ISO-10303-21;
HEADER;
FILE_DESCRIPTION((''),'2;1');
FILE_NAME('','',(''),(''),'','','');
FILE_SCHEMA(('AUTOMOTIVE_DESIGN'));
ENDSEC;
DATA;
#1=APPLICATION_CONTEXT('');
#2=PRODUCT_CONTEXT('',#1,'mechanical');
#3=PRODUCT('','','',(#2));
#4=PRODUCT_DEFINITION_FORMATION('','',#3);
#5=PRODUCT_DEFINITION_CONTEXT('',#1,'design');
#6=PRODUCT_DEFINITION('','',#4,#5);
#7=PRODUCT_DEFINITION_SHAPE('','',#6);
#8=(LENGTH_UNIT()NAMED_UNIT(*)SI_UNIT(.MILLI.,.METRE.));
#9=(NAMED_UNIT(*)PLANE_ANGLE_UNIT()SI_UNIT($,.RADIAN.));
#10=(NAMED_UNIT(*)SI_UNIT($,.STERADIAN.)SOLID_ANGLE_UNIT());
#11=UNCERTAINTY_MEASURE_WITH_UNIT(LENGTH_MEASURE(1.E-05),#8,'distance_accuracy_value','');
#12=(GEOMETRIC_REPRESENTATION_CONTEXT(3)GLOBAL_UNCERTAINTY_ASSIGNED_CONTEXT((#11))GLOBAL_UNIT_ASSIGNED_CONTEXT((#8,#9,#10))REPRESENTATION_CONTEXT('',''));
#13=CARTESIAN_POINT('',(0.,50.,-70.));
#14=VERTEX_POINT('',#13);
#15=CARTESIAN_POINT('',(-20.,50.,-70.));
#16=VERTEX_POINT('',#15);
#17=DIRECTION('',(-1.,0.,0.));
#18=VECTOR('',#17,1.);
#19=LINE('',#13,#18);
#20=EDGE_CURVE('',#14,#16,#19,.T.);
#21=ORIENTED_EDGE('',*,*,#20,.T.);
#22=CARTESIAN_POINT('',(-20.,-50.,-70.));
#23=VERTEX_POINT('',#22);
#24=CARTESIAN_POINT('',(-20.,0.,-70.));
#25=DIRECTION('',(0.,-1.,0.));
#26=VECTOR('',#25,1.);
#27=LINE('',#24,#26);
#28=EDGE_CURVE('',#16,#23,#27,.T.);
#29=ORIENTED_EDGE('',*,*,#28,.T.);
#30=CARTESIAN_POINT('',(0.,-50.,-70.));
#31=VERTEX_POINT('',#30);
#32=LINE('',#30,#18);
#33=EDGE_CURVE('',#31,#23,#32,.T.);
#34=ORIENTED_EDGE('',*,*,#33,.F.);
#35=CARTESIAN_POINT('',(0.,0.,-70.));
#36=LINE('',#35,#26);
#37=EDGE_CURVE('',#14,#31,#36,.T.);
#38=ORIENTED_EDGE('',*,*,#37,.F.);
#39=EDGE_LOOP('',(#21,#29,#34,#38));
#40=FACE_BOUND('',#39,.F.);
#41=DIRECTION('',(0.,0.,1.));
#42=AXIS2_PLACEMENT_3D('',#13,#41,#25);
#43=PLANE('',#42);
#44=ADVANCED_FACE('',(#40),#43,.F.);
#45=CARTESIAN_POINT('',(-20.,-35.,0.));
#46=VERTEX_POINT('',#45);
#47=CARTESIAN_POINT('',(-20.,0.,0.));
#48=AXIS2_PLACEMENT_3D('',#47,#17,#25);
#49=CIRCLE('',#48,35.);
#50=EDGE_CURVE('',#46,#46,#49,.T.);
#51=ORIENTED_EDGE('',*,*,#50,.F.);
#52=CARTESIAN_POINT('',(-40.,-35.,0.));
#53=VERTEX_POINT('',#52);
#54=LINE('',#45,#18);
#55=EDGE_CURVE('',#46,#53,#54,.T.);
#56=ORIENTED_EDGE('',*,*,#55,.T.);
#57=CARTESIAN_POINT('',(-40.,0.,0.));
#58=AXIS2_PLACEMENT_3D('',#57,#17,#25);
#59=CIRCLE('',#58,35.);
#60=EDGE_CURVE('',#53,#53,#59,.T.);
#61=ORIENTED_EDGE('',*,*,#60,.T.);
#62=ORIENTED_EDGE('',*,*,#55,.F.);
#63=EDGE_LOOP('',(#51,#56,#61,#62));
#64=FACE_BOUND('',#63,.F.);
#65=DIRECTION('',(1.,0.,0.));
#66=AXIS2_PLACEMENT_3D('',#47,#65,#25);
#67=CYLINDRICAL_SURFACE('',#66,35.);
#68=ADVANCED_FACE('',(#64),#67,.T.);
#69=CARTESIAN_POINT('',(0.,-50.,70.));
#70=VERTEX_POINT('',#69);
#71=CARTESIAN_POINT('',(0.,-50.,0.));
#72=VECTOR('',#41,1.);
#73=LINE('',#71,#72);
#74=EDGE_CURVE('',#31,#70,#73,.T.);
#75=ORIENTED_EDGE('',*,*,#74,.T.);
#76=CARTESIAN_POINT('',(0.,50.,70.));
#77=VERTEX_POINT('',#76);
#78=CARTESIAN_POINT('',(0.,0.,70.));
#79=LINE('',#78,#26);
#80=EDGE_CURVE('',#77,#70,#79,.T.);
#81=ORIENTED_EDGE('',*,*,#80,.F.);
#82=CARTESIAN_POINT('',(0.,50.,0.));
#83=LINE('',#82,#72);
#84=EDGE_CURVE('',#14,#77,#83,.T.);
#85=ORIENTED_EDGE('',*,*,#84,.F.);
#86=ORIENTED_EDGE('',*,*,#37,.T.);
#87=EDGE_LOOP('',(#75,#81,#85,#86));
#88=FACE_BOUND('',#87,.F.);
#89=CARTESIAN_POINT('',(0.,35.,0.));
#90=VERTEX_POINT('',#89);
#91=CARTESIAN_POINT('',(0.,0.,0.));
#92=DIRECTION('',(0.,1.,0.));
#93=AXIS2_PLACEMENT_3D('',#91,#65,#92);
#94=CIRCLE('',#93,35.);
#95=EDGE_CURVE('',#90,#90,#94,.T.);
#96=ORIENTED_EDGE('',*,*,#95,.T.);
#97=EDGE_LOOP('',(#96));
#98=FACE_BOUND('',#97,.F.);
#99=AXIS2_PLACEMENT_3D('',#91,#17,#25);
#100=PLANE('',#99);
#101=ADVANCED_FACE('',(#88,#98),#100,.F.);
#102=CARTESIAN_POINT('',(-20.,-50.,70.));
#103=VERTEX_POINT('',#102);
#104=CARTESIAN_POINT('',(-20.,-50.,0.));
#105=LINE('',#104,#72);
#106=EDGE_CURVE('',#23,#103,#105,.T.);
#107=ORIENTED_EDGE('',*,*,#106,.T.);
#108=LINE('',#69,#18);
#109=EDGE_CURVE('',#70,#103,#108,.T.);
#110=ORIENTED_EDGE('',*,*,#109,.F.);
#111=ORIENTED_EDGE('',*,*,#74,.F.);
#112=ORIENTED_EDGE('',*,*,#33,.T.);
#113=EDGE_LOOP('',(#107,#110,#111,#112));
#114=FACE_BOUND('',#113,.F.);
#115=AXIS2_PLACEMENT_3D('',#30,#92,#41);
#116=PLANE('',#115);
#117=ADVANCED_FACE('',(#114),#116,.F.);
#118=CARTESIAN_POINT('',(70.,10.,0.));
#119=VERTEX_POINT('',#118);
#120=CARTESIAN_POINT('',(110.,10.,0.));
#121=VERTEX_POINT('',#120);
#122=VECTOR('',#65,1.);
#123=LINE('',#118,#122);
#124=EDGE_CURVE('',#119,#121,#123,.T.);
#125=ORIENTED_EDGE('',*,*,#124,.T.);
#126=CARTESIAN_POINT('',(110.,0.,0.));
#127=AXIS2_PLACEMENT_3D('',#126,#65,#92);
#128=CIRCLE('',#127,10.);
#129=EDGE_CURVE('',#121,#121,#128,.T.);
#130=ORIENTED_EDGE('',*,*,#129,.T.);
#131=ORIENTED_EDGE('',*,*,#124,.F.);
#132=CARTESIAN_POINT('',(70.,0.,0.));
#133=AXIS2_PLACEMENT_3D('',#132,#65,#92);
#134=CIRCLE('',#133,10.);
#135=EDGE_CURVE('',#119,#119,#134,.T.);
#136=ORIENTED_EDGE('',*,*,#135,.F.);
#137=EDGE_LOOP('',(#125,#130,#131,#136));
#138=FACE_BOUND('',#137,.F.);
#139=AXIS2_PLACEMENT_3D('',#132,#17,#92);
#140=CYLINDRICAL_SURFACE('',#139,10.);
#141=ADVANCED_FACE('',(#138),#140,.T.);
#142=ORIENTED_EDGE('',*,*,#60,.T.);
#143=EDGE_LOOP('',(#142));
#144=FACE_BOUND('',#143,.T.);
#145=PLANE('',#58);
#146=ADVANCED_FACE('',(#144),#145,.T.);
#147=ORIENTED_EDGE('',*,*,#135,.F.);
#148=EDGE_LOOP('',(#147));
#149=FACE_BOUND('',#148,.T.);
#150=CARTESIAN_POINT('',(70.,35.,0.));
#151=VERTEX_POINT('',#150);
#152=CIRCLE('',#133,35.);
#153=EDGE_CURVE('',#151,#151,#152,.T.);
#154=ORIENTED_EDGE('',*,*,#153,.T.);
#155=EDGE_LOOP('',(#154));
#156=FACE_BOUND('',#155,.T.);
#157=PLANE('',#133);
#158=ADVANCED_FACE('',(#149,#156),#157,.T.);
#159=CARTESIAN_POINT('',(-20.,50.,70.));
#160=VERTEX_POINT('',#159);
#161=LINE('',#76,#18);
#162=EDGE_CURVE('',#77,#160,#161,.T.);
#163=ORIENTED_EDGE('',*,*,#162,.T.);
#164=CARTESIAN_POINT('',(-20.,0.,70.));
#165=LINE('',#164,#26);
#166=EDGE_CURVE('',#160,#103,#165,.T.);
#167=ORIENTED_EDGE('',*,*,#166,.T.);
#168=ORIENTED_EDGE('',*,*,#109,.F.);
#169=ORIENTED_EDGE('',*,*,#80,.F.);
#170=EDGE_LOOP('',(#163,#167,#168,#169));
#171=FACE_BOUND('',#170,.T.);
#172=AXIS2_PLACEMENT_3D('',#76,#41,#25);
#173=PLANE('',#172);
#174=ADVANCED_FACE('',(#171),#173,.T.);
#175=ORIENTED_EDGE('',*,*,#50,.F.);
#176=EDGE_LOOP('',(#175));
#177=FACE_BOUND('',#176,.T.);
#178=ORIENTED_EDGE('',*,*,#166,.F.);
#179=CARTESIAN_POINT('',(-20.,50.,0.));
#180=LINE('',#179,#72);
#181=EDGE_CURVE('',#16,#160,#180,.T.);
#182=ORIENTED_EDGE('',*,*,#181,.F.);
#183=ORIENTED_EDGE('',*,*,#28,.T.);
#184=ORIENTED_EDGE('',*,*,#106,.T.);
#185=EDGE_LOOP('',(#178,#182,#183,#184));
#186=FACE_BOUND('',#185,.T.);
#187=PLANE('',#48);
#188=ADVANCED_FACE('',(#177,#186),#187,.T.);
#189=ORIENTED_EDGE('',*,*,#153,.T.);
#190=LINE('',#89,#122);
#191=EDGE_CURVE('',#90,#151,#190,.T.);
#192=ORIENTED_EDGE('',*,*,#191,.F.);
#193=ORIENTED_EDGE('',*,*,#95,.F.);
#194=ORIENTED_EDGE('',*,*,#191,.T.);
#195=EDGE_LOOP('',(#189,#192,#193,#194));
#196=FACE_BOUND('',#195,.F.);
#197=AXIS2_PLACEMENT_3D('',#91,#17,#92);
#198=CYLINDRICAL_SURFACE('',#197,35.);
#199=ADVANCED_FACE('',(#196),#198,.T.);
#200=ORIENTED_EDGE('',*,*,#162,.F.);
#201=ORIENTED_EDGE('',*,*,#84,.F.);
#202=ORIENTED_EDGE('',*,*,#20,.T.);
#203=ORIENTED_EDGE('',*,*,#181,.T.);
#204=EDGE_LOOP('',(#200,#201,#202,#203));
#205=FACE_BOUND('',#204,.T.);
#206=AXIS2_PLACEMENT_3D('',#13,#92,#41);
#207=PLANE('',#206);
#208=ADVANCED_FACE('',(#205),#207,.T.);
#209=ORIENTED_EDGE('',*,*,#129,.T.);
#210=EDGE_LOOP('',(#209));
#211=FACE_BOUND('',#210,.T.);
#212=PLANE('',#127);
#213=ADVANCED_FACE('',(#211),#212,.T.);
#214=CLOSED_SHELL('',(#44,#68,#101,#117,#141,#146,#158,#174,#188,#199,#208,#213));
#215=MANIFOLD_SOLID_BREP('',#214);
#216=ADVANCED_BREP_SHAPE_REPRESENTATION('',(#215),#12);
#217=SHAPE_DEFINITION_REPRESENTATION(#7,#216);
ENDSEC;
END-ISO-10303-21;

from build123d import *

# Parameters (mm, degrees)
F0_R     = 35
F1_DEPTH = 70
F2_R     = 10
F3_DEPTH = 40
F4_W     = 100
F4_H     = 140
F4_R     = 35
F5_DEPTH = 20
F6_R     = 35
F7_DEPTH = 20


with BuildPart() as f1:
    # F0 (on Right) → F1 (new body)
    with BuildSketch(Plane.YZ):
        Circle(F0_R)
    extrude(amount=F1_DEPTH)

    # F2 (on face) → F3 (join)
    with BuildSketch(Plane.YZ.offset(70)):
        Circle(F2_R)
    extrude(amount=F3_DEPTH)

    # F4 (on face) → F5 (join)
    with BuildSketch(Plane(origin=(0, 0, 0), x_dir=(0, -1, 0), z_dir=(-1, 0, 0))):
        Rectangle(F4_W, F4_H)
        Circle(F4_R, mode=Mode.SUBTRACT)
        Circle(F4_R)
    extrude(amount=F5_DEPTH)

    # F6 (on face) → F7 (join)
    with BuildSketch(Plane(origin=(-20, 0, 0), x_dir=(0, -1, 0), z_dir=(-1, 0, 0))):
        Circle(F6_R)
    extrude(amount=F7_DEPTH)


solid = f1.part
